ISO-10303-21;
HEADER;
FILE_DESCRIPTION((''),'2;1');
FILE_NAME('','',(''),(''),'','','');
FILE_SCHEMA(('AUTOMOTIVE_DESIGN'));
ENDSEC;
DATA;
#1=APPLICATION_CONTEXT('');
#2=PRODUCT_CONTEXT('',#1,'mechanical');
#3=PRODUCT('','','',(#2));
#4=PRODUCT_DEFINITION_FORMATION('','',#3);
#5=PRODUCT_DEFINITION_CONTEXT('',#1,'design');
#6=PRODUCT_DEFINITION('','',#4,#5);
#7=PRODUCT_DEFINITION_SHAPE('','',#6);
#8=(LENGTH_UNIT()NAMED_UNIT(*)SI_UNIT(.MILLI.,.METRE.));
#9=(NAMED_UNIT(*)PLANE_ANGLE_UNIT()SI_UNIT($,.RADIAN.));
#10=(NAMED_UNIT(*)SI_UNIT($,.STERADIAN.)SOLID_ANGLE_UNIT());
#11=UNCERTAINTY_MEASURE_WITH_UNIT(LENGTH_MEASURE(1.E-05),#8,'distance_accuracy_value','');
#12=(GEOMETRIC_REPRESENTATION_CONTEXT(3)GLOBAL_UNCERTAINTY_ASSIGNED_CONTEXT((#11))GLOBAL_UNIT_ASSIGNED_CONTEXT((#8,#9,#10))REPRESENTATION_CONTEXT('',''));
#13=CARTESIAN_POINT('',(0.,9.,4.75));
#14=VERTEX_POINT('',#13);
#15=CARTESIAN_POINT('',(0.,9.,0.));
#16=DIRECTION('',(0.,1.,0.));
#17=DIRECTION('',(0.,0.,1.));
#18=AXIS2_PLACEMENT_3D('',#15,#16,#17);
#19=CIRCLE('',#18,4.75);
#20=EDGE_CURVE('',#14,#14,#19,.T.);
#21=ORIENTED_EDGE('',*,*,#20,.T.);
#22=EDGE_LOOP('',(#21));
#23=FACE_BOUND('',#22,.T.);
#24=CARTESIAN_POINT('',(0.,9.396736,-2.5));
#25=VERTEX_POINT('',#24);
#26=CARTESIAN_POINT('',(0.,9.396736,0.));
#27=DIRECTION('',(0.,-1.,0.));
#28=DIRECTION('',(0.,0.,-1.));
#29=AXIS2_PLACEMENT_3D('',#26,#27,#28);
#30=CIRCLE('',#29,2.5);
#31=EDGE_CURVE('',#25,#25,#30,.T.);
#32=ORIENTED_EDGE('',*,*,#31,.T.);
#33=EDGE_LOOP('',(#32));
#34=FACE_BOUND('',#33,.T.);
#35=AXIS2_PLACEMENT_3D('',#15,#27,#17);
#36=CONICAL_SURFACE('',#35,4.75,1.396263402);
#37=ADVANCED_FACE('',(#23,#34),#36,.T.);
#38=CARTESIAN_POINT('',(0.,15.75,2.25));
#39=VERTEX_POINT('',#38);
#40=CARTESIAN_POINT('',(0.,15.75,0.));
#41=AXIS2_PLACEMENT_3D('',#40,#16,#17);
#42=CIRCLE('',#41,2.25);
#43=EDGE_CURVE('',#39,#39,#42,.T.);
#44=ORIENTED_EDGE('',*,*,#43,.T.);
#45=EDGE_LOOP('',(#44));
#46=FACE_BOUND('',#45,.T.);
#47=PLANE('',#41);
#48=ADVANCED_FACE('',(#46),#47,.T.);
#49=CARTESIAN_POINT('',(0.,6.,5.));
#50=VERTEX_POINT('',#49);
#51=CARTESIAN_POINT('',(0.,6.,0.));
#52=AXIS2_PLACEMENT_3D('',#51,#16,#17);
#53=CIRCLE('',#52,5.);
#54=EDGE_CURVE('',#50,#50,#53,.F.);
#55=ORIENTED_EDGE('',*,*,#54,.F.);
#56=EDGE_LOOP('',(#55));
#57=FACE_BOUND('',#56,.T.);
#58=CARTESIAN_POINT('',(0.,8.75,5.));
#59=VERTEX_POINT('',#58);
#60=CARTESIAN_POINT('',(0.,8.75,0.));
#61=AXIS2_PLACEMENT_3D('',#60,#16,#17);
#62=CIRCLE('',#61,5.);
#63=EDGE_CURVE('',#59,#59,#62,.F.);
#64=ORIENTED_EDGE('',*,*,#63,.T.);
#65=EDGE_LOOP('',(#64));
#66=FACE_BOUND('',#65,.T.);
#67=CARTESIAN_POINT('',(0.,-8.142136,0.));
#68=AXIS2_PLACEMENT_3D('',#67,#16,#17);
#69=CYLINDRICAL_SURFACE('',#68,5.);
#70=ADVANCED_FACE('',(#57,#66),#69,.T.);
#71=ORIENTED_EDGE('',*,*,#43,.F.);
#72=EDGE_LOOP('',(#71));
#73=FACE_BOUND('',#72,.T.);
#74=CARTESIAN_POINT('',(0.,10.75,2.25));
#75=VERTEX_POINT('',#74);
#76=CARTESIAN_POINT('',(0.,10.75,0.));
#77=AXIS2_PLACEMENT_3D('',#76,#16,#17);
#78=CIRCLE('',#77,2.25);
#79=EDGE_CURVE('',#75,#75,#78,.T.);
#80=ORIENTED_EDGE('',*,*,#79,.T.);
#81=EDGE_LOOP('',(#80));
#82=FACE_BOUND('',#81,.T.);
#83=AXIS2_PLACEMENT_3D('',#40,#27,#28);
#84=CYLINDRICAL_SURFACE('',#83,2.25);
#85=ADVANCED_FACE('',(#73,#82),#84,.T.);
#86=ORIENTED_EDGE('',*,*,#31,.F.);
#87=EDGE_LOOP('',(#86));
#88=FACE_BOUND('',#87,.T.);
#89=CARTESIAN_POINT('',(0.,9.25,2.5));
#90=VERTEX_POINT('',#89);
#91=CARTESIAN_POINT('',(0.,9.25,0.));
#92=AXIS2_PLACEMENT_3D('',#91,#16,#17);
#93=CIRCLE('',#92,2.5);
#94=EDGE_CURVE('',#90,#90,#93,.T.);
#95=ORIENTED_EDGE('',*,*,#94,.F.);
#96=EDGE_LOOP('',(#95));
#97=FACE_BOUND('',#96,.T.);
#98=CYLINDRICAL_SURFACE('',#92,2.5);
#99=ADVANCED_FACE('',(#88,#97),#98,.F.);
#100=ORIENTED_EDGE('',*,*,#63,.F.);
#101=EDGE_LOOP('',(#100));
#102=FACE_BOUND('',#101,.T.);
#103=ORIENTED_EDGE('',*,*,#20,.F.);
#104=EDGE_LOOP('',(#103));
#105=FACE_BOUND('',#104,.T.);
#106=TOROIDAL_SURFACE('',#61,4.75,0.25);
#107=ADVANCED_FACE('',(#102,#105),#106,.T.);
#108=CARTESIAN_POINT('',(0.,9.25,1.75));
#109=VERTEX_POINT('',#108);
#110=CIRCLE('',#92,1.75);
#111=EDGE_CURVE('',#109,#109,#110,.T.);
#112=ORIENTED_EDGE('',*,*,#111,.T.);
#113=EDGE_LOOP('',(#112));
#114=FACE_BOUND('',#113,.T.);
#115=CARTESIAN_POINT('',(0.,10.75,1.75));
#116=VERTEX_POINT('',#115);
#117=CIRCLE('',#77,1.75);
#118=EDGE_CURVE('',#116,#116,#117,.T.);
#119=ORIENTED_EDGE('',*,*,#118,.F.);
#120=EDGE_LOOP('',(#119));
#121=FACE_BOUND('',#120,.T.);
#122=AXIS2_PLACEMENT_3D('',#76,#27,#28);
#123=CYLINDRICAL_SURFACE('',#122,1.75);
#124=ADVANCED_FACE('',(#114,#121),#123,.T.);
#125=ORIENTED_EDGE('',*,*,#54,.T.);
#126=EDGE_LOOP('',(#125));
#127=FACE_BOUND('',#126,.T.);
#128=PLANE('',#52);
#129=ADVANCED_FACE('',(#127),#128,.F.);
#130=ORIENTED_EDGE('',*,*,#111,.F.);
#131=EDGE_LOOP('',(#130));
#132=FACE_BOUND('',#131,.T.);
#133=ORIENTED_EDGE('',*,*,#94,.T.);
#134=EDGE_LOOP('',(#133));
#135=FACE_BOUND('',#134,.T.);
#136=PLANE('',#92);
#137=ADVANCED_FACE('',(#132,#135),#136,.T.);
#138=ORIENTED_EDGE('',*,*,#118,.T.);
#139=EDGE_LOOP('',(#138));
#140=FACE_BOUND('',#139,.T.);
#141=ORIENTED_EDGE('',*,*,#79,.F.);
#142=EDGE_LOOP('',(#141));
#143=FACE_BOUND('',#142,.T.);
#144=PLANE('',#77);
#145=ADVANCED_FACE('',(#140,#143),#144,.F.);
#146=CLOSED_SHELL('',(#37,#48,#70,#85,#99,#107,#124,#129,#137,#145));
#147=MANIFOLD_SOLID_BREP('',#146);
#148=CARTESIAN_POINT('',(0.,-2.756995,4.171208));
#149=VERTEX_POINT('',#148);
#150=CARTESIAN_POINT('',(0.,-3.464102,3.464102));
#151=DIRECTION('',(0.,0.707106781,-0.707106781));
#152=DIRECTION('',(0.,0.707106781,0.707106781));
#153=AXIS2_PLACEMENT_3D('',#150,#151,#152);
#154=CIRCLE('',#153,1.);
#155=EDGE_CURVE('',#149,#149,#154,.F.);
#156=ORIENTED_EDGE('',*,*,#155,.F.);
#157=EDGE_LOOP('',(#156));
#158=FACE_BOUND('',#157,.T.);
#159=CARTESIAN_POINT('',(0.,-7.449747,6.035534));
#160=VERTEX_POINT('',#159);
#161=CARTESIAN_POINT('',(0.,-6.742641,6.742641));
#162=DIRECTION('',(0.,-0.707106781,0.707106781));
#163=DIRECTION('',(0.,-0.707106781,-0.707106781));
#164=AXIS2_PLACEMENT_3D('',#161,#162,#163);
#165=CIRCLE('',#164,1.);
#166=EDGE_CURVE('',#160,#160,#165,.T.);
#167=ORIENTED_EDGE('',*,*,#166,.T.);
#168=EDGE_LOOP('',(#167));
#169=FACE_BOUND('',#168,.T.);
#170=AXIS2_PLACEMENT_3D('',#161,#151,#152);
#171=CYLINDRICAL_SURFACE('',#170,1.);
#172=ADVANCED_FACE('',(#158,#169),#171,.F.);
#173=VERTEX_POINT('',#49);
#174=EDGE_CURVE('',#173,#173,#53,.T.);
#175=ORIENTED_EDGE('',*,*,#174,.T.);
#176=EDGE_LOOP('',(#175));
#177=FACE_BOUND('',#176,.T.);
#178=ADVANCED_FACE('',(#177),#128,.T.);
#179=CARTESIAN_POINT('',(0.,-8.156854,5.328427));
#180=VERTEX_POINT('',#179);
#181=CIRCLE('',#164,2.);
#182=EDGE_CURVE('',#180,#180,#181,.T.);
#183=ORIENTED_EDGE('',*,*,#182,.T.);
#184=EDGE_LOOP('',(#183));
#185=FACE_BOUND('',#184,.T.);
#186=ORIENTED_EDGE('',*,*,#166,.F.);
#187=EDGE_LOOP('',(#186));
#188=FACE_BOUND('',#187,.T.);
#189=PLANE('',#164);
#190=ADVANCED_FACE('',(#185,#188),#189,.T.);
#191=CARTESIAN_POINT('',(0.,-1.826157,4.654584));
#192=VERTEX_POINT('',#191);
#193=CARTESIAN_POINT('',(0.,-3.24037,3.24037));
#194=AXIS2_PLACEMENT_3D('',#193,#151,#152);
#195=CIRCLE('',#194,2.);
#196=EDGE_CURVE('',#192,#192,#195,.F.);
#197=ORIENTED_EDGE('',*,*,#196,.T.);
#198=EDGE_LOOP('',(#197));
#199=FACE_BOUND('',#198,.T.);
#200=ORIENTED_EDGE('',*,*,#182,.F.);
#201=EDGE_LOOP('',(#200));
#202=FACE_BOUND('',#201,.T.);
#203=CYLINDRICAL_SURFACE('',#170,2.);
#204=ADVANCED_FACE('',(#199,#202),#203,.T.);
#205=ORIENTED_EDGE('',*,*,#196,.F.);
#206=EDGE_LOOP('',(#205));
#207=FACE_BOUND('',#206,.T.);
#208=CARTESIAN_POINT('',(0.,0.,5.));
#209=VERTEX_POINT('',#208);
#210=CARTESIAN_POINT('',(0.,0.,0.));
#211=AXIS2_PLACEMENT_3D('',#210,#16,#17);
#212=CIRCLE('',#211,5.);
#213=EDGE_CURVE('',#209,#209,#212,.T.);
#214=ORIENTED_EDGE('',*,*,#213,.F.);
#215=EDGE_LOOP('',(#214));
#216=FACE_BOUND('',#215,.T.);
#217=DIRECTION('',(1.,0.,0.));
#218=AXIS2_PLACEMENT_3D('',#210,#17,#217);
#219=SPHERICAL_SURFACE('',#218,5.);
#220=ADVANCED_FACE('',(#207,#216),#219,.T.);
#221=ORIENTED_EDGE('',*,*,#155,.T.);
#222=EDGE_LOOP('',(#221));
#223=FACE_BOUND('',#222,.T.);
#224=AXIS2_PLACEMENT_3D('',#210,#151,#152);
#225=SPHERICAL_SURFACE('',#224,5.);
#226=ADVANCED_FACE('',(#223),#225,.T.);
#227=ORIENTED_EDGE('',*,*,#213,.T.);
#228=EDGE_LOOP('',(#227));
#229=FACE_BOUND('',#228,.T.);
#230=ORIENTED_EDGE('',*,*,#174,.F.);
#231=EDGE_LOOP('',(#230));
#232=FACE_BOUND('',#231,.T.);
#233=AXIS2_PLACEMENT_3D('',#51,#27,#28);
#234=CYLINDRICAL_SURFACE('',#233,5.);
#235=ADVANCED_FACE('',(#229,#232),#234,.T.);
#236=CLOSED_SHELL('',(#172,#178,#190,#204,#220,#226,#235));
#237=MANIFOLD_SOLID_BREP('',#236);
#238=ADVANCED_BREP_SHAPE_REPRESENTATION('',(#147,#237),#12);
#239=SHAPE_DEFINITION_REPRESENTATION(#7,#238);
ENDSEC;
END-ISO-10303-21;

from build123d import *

# Parameters (mm, degrees)
SKETCH1_R           = 5
BOSS_EXTRUDE1_DEPTH = 6
SKETCH2_R           = 5
BOSS_EXTRUDE2_DEPTH = 3
FILLET1_R           = 0.25
SKETCH3_R           = 4.75
BOSS_EXTRUDE3_DEPTH = 0.5
BOSS_EXTRUDE3_TAPER = 80
SKETCH4_R           = 2.5
CUT_EXTRUDE1_DEPTH  = 0.25
SKETCH5_R           = 1.75
BOSS_EXTRUDE4_DEPTH = 1.5
SKETCH6_R           = 2.25
BOSS_EXTRUDE5_DEPTH = 5
SKETCH8_R           = 2
SKETCH8_R_2         = 1
BOSS_EXTRUDE6_DEPTH = 6


# Read off the part's stored shape, not the designer's step: Dome1
with BuildPart() as part:
    # Sketch1 → Boss-Extrude1 (new body)
    with BuildSketch(Plane(origin=(0, 0, 0), x_dir=(1, 0, 0), z_dir=(0, 1, 0))):
        with Locations(Location((0, 0, 0), (0, 0, 270))):
            Circle(SKETCH1_R)
    extrude(amount=BOSS_EXTRUDE1_DEPTH)

    # Dome1 outline → Dome1 (revolve)
    with BuildSketch(Plane.XY):
        with BuildLine():
            Line((0, 5e-09), (0, -5))
            ThreePointArc((0, -5), (3.535533908, -3.535533904), (5, 5e-09))
            Line((5, 5e-09), (0, 5e-09))
        make_face()
    revolve(axis=Axis((0, 0, 0), (0, 1, 0)))

    # Sketch8 → Boss-Extrude6 (add)
    with BuildSketch(Plane(origin=(0, -2.5, 2.5), x_dir=(1, 0, 0), z_dir=(0, -0.7071067811865475, 0.7071067811865477))):
        with Locations(Location((0, 0, 0), (0, 0, 90))):
            Circle(SKETCH8_R)
        with Locations(Location((0, 0, 0), (0, 0, 90))):
            Circle(SKETCH8_R_2, mode=Mode.SUBTRACT)
    extrude(amount=BOSS_EXTRUDE6_DEPTH)


with BuildPart() as body_2:
    # Sketch2 → Boss-Extrude2 (new body)
    with BuildSketch(Plane(origin=(0, 9, 0), x_dir=(1, 0, 0), z_dir=(0, 1, 0))):
        with Locations(Location((0, 0, 0), (0, 0, 270))):
            Circle(SKETCH2_R)
    extrude(amount=-BOSS_EXTRUDE2_DEPTH)

    # Fillet1
    fillet1_edges = [body_2.edges().sort_by_distance(p)[0] for p in [
        (0, 9, -5),
    ]]
    fillet(fillet1_edges, radius=FILLET1_R)

    # Sketch3 → Boss-Extrude3 (add)
    with BuildSketch(Plane(origin=(0, 9, 0), x_dir=(1, 0, 0), z_dir=(0, 1, 0))):
        Circle(SKETCH3_R)
    extrude(amount=BOSS_EXTRUDE3_DEPTH, taper=BOSS_EXTRUDE3_TAPER)

    # Sketch4 → Cut-Extrude1 (cut)
    with BuildSketch(Plane(origin=(0, 9.5, 0), x_dir=(1, 0, 0), z_dir=(0, 1, 0))):
        with Locations(Location((0, 0, 0), (0, 0, 270))):
            Circle(SKETCH4_R)
    extrude(amount=-CUT_EXTRUDE1_DEPTH, mode=Mode.SUBTRACT)

    # Sketch5 → Boss-Extrude4 (add)
    with BuildSketch(Plane(origin=(0, 9.25, 0), x_dir=(1, 0, 0), z_dir=(0, 1, 0))):
        with Locations(Location((0, 0, 0), (0, 0, 270))):
            Circle(SKETCH5_R)
    extrude(amount=BOSS_EXTRUDE4_DEPTH)

    # Sketch6 → Boss-Extrude5 (add)
    with BuildSketch(Plane(origin=(0, 10.75, 0), x_dir=(1, 0, 0), z_dir=(0, 1, 0))):
        with Locations(Location((0, 0, 0), (0, 0, 270))):
            Circle(SKETCH6_R)
    extrude(amount=BOSS_EXTRUDE5_DEPTH)


solid = Compound([part.part, body_2.part])
